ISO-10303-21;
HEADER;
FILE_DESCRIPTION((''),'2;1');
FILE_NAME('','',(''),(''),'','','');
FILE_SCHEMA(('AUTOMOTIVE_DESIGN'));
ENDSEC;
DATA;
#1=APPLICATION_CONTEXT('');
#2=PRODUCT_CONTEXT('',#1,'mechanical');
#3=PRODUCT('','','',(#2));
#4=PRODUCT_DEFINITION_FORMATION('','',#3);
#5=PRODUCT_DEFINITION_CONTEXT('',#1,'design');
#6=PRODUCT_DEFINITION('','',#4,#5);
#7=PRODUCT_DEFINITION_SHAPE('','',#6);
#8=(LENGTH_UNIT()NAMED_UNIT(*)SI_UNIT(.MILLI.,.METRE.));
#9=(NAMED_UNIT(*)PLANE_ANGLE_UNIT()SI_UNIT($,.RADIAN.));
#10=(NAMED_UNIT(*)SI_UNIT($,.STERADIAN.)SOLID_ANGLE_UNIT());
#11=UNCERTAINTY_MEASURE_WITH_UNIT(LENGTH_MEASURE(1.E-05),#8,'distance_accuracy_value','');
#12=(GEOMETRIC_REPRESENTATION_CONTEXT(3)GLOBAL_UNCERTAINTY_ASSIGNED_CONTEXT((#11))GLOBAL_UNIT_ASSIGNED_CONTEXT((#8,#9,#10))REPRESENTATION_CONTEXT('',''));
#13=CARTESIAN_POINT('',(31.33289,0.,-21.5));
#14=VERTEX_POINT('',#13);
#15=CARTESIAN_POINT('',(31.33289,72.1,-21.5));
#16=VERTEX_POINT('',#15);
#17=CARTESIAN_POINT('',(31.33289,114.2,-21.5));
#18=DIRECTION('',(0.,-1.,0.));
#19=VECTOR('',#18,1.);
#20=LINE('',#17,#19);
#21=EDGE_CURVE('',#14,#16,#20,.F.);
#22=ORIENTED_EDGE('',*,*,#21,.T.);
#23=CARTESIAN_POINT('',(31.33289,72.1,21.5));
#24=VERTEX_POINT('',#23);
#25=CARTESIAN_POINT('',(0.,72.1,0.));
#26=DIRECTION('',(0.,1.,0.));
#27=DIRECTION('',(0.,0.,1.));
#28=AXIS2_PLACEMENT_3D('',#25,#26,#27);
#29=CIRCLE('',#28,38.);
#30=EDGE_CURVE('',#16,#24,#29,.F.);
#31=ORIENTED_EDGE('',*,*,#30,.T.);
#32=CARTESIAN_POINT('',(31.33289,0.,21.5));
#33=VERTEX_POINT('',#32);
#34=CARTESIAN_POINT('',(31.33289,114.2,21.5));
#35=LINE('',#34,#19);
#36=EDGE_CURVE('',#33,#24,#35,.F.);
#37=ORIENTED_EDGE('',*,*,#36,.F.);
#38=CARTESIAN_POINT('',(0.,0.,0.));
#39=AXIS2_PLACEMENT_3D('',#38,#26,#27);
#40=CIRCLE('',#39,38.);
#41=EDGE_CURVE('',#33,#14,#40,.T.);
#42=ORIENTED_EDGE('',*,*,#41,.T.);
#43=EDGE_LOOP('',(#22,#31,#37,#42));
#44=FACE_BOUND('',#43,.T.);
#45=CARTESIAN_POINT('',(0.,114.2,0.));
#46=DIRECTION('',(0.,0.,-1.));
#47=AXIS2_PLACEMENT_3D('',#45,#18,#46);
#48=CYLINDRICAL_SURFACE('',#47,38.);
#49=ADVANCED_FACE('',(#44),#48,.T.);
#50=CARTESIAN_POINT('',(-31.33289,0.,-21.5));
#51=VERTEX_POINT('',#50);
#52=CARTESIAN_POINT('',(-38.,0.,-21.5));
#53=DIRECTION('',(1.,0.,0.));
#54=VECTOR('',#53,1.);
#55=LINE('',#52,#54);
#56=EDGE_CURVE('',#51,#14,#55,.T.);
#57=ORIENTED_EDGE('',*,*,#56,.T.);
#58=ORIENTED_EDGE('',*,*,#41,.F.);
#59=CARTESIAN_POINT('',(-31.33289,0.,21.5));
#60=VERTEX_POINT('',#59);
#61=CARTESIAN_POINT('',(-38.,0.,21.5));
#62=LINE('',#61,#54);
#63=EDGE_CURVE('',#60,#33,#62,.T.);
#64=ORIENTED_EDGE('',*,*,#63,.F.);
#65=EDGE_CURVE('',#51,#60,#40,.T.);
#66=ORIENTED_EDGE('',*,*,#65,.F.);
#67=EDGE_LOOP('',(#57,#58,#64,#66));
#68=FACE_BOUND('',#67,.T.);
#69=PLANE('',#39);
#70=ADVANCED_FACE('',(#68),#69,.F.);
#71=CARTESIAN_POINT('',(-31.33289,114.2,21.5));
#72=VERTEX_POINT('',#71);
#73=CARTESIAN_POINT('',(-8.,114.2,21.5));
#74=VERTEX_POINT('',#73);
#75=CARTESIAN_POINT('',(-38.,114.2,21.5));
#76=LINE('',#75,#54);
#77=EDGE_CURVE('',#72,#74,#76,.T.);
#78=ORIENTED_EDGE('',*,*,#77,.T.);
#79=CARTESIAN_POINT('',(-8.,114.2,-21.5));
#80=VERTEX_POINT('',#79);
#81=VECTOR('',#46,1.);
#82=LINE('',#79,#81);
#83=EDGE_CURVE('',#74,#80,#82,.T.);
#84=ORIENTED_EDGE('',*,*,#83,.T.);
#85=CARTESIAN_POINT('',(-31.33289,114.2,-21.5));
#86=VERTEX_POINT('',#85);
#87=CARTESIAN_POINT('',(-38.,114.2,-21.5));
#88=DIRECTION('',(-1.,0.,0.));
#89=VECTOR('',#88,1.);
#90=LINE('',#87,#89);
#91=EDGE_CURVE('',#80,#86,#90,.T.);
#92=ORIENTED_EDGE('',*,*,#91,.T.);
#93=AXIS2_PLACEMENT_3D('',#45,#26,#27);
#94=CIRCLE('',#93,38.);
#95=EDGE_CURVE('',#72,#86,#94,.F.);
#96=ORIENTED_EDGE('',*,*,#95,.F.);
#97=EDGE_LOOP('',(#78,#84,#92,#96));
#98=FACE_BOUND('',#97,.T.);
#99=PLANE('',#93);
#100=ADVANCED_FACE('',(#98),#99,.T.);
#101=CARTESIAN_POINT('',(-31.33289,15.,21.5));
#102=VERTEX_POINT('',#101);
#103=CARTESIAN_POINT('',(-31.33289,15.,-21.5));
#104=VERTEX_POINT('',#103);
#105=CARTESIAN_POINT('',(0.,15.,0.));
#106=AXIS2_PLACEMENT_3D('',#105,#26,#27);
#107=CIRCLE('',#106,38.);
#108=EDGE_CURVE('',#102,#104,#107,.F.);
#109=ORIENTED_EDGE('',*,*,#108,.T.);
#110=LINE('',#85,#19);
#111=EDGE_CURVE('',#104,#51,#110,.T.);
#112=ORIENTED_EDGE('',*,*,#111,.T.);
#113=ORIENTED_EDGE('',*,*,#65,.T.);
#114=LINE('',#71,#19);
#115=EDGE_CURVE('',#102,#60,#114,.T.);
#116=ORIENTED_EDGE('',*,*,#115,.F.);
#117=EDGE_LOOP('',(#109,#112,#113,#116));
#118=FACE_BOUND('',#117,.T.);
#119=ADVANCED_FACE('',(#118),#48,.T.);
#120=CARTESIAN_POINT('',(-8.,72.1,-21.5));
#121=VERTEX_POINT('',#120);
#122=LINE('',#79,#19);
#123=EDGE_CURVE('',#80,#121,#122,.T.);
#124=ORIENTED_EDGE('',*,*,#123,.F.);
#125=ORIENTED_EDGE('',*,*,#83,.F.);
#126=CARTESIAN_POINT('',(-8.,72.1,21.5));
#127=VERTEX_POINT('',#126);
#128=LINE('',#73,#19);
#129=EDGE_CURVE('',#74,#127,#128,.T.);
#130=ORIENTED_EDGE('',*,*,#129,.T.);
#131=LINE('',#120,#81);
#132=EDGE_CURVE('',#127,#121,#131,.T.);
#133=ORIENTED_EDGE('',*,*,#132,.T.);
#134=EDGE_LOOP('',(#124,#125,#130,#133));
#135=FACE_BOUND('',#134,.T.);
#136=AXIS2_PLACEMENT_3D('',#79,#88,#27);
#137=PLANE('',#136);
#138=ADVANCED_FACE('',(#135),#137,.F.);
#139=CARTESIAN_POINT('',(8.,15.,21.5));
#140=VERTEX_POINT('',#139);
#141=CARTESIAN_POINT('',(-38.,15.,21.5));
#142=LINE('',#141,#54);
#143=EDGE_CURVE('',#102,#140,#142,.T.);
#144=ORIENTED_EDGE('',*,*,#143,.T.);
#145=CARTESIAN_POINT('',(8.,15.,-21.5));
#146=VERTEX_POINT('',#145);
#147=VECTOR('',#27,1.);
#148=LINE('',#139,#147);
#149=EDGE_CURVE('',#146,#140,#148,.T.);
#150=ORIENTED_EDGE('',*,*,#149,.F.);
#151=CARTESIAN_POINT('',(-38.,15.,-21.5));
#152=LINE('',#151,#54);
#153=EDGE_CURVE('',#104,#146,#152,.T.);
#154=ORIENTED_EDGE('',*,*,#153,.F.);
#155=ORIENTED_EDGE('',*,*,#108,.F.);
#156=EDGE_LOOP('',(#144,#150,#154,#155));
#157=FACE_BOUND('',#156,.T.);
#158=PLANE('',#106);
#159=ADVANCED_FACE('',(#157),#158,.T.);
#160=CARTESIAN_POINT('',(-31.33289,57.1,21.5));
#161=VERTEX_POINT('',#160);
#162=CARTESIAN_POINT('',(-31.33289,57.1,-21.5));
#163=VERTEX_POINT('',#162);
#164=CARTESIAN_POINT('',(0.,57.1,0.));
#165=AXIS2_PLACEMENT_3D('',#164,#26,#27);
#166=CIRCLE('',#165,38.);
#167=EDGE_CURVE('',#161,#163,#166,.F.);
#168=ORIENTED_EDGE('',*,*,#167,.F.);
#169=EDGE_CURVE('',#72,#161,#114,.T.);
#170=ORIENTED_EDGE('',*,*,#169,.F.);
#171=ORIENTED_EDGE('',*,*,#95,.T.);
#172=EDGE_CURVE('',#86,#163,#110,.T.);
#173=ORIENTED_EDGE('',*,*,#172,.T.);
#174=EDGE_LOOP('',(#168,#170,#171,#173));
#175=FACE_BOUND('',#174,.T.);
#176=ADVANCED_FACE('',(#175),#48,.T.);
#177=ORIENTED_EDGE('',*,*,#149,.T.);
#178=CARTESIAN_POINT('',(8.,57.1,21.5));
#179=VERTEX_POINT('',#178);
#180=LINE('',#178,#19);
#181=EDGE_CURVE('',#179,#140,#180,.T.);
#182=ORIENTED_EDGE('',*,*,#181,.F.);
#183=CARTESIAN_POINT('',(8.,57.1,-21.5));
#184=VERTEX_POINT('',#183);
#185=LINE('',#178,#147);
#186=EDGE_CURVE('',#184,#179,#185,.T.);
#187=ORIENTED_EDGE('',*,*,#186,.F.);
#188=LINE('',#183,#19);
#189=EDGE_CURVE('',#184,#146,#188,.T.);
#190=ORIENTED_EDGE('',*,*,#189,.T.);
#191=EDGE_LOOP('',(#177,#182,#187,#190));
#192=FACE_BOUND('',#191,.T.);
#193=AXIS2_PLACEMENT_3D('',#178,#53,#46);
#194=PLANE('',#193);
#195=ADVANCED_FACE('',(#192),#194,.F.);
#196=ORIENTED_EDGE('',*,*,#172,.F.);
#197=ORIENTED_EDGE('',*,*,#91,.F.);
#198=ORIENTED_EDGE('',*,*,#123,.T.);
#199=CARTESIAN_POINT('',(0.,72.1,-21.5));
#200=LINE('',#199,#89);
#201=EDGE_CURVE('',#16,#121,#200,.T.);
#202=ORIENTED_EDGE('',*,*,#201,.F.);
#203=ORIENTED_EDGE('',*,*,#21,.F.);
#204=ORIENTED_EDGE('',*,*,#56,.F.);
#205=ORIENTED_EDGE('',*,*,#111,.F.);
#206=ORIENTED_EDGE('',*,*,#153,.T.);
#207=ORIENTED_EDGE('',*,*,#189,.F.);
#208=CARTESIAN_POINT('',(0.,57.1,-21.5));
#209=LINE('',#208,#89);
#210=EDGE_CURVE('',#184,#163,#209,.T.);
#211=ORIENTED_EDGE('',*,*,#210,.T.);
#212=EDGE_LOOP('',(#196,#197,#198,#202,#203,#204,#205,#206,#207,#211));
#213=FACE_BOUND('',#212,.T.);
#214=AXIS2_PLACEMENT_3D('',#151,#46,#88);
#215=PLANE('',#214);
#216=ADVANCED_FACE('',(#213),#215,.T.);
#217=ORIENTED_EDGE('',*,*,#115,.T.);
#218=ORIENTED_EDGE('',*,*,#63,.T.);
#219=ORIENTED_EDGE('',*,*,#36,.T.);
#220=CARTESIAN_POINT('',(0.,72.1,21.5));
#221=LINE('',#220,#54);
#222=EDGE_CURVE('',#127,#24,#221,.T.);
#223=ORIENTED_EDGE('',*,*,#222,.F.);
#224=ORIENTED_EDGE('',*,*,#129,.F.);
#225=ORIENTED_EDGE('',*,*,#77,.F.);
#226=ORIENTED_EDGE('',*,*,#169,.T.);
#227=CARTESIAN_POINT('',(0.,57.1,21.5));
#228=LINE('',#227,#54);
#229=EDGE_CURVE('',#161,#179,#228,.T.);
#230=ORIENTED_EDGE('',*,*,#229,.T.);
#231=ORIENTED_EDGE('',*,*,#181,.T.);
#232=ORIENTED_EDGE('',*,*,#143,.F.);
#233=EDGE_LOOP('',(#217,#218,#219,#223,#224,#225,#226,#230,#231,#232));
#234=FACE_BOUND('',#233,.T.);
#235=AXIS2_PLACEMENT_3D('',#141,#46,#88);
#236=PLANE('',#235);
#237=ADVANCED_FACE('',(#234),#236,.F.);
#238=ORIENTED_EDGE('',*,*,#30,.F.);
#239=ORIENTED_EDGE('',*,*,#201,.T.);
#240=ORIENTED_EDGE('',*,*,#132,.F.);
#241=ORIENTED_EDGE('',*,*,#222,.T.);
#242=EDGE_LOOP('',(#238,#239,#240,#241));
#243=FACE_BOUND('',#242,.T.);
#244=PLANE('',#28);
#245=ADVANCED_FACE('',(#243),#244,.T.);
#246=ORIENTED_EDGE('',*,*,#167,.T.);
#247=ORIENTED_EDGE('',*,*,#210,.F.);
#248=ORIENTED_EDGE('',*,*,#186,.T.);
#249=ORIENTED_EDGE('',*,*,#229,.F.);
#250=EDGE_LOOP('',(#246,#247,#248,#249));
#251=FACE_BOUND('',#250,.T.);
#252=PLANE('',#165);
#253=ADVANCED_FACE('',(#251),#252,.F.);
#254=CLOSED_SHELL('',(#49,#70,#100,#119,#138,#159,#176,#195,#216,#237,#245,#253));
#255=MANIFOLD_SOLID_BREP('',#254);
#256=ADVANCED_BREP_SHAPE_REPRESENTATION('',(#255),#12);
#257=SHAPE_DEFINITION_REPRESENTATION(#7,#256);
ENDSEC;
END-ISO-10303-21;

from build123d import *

# Parameters (mm, degrees)
SKETCH1_W           = 76
SKETCH1_H           = 43
BOSS_EXTRUDE1_DEPTH = 15
SKETCH3_W           = 30
SKETCH3_H           = 43
BOSS_EXTRUDE2_DEPTH = 42.1
BOSS_EXTRUDE3_START = 42.1
SKETCH4_W           = 76
SKETCH4_H           = 43
BOSS_EXTRUDE3_DEPTH = 15
SKETCH5_W           = 30
SKETCH5_H           = 43
BOSS_EXTRUDE4_DEPTH = 42.1
CUT_EXTRUDE1_DEPTH  = 114.2


# Read off the part's stored shape, not the designer's step: Cut-Extrude1
with BuildPart() as part:
    # Sketch1 → Boss-Extrude1 (new body)
    with BuildSketch(Plane(origin=(0, 0, 0), x_dir=(1, 0, 0), z_dir=(0, 1, 0))):
        Rectangle(SKETCH1_W, SKETCH1_H)
    extrude(amount=BOSS_EXTRUDE1_DEPTH)

    # Sketch3 → Boss-Extrude2 (add)
    with BuildSketch(Plane(origin=(0, 15, 0), x_dir=(1, 0, 0), z_dir=(0, 1, 0))):
        with Locations((23, 0)):
            Rectangle(SKETCH3_W, SKETCH3_H)
    extrude(amount=BOSS_EXTRUDE2_DEPTH)

    # Sketch4 → Boss-Extrude3 (add)
    with BuildSketch(Plane(origin=(0, 15, 0), x_dir=(1, 0, 0), z_dir=(0, 1, 0)).offset(BOSS_EXTRUDE3_START)):
        Rectangle(SKETCH4_W, SKETCH4_H)
    extrude(amount=BOSS_EXTRUDE3_DEPTH)

    # Sketch5 → Boss-Extrude4 (add)
    with BuildSketch(Plane(origin=(0, 72.1, 0), x_dir=(1, 0, 0), z_dir=(0, 1, 0))):
        with Locations((-23, 0)):
            Rectangle(SKETCH5_W, SKETCH5_H)
    extrude(amount=BOSS_EXTRUDE4_DEPTH)

    # Cut-Extrude1 outline → Cut-Extrude1 (cut)
    with BuildSketch(Plane(origin=(0, 0, 0), x_dir=(1, 0, 0), z_dir=(0, 1, 0))):
        with BuildLine():
            Line((-38, -21.5), (-31.332890068, -21.5))
            ThreePointArc((-31.332890068, -21.5), (-36.294970902, -11.255002765), (-38, 1.36e-07))
            Line((-38, 1.36e-07), (-38, -21.5))
        make_face()
        with BuildLine():
            Line((-38, 21.5), (-38, 1.36e-07))
            ThreePointArc((-38, 1.36e-07), (-36.294970861, 11.255002895), (-31.332890068, 21.5))
            Line((-31.332890068, 21.5), (-38, 21.5))
        make_face()
        with BuildLine():
            ThreePointArc((38, -1.36e-07), (36.294970861, -11.255002895), (31.332890068, -21.5))
            Line((31.332890068, -21.5), (38, -21.5))
            Line((38, -21.5), (38, -1.36e-07))
        make_face()
        with BuildLine():
            ThreePointArc((31.332890068, 21.5), (36.294970902, 11.255002765), (38, -1.36e-07))
            Line((38, -1.36e-07), (38, 21.5))
            Line((38, 21.5), (31.332890068, 21.5))
        make_face()
    extrude(amount=CUT_EXTRUDE1_DEPTH, mode=Mode.SUBTRACT)


solid = part.part
